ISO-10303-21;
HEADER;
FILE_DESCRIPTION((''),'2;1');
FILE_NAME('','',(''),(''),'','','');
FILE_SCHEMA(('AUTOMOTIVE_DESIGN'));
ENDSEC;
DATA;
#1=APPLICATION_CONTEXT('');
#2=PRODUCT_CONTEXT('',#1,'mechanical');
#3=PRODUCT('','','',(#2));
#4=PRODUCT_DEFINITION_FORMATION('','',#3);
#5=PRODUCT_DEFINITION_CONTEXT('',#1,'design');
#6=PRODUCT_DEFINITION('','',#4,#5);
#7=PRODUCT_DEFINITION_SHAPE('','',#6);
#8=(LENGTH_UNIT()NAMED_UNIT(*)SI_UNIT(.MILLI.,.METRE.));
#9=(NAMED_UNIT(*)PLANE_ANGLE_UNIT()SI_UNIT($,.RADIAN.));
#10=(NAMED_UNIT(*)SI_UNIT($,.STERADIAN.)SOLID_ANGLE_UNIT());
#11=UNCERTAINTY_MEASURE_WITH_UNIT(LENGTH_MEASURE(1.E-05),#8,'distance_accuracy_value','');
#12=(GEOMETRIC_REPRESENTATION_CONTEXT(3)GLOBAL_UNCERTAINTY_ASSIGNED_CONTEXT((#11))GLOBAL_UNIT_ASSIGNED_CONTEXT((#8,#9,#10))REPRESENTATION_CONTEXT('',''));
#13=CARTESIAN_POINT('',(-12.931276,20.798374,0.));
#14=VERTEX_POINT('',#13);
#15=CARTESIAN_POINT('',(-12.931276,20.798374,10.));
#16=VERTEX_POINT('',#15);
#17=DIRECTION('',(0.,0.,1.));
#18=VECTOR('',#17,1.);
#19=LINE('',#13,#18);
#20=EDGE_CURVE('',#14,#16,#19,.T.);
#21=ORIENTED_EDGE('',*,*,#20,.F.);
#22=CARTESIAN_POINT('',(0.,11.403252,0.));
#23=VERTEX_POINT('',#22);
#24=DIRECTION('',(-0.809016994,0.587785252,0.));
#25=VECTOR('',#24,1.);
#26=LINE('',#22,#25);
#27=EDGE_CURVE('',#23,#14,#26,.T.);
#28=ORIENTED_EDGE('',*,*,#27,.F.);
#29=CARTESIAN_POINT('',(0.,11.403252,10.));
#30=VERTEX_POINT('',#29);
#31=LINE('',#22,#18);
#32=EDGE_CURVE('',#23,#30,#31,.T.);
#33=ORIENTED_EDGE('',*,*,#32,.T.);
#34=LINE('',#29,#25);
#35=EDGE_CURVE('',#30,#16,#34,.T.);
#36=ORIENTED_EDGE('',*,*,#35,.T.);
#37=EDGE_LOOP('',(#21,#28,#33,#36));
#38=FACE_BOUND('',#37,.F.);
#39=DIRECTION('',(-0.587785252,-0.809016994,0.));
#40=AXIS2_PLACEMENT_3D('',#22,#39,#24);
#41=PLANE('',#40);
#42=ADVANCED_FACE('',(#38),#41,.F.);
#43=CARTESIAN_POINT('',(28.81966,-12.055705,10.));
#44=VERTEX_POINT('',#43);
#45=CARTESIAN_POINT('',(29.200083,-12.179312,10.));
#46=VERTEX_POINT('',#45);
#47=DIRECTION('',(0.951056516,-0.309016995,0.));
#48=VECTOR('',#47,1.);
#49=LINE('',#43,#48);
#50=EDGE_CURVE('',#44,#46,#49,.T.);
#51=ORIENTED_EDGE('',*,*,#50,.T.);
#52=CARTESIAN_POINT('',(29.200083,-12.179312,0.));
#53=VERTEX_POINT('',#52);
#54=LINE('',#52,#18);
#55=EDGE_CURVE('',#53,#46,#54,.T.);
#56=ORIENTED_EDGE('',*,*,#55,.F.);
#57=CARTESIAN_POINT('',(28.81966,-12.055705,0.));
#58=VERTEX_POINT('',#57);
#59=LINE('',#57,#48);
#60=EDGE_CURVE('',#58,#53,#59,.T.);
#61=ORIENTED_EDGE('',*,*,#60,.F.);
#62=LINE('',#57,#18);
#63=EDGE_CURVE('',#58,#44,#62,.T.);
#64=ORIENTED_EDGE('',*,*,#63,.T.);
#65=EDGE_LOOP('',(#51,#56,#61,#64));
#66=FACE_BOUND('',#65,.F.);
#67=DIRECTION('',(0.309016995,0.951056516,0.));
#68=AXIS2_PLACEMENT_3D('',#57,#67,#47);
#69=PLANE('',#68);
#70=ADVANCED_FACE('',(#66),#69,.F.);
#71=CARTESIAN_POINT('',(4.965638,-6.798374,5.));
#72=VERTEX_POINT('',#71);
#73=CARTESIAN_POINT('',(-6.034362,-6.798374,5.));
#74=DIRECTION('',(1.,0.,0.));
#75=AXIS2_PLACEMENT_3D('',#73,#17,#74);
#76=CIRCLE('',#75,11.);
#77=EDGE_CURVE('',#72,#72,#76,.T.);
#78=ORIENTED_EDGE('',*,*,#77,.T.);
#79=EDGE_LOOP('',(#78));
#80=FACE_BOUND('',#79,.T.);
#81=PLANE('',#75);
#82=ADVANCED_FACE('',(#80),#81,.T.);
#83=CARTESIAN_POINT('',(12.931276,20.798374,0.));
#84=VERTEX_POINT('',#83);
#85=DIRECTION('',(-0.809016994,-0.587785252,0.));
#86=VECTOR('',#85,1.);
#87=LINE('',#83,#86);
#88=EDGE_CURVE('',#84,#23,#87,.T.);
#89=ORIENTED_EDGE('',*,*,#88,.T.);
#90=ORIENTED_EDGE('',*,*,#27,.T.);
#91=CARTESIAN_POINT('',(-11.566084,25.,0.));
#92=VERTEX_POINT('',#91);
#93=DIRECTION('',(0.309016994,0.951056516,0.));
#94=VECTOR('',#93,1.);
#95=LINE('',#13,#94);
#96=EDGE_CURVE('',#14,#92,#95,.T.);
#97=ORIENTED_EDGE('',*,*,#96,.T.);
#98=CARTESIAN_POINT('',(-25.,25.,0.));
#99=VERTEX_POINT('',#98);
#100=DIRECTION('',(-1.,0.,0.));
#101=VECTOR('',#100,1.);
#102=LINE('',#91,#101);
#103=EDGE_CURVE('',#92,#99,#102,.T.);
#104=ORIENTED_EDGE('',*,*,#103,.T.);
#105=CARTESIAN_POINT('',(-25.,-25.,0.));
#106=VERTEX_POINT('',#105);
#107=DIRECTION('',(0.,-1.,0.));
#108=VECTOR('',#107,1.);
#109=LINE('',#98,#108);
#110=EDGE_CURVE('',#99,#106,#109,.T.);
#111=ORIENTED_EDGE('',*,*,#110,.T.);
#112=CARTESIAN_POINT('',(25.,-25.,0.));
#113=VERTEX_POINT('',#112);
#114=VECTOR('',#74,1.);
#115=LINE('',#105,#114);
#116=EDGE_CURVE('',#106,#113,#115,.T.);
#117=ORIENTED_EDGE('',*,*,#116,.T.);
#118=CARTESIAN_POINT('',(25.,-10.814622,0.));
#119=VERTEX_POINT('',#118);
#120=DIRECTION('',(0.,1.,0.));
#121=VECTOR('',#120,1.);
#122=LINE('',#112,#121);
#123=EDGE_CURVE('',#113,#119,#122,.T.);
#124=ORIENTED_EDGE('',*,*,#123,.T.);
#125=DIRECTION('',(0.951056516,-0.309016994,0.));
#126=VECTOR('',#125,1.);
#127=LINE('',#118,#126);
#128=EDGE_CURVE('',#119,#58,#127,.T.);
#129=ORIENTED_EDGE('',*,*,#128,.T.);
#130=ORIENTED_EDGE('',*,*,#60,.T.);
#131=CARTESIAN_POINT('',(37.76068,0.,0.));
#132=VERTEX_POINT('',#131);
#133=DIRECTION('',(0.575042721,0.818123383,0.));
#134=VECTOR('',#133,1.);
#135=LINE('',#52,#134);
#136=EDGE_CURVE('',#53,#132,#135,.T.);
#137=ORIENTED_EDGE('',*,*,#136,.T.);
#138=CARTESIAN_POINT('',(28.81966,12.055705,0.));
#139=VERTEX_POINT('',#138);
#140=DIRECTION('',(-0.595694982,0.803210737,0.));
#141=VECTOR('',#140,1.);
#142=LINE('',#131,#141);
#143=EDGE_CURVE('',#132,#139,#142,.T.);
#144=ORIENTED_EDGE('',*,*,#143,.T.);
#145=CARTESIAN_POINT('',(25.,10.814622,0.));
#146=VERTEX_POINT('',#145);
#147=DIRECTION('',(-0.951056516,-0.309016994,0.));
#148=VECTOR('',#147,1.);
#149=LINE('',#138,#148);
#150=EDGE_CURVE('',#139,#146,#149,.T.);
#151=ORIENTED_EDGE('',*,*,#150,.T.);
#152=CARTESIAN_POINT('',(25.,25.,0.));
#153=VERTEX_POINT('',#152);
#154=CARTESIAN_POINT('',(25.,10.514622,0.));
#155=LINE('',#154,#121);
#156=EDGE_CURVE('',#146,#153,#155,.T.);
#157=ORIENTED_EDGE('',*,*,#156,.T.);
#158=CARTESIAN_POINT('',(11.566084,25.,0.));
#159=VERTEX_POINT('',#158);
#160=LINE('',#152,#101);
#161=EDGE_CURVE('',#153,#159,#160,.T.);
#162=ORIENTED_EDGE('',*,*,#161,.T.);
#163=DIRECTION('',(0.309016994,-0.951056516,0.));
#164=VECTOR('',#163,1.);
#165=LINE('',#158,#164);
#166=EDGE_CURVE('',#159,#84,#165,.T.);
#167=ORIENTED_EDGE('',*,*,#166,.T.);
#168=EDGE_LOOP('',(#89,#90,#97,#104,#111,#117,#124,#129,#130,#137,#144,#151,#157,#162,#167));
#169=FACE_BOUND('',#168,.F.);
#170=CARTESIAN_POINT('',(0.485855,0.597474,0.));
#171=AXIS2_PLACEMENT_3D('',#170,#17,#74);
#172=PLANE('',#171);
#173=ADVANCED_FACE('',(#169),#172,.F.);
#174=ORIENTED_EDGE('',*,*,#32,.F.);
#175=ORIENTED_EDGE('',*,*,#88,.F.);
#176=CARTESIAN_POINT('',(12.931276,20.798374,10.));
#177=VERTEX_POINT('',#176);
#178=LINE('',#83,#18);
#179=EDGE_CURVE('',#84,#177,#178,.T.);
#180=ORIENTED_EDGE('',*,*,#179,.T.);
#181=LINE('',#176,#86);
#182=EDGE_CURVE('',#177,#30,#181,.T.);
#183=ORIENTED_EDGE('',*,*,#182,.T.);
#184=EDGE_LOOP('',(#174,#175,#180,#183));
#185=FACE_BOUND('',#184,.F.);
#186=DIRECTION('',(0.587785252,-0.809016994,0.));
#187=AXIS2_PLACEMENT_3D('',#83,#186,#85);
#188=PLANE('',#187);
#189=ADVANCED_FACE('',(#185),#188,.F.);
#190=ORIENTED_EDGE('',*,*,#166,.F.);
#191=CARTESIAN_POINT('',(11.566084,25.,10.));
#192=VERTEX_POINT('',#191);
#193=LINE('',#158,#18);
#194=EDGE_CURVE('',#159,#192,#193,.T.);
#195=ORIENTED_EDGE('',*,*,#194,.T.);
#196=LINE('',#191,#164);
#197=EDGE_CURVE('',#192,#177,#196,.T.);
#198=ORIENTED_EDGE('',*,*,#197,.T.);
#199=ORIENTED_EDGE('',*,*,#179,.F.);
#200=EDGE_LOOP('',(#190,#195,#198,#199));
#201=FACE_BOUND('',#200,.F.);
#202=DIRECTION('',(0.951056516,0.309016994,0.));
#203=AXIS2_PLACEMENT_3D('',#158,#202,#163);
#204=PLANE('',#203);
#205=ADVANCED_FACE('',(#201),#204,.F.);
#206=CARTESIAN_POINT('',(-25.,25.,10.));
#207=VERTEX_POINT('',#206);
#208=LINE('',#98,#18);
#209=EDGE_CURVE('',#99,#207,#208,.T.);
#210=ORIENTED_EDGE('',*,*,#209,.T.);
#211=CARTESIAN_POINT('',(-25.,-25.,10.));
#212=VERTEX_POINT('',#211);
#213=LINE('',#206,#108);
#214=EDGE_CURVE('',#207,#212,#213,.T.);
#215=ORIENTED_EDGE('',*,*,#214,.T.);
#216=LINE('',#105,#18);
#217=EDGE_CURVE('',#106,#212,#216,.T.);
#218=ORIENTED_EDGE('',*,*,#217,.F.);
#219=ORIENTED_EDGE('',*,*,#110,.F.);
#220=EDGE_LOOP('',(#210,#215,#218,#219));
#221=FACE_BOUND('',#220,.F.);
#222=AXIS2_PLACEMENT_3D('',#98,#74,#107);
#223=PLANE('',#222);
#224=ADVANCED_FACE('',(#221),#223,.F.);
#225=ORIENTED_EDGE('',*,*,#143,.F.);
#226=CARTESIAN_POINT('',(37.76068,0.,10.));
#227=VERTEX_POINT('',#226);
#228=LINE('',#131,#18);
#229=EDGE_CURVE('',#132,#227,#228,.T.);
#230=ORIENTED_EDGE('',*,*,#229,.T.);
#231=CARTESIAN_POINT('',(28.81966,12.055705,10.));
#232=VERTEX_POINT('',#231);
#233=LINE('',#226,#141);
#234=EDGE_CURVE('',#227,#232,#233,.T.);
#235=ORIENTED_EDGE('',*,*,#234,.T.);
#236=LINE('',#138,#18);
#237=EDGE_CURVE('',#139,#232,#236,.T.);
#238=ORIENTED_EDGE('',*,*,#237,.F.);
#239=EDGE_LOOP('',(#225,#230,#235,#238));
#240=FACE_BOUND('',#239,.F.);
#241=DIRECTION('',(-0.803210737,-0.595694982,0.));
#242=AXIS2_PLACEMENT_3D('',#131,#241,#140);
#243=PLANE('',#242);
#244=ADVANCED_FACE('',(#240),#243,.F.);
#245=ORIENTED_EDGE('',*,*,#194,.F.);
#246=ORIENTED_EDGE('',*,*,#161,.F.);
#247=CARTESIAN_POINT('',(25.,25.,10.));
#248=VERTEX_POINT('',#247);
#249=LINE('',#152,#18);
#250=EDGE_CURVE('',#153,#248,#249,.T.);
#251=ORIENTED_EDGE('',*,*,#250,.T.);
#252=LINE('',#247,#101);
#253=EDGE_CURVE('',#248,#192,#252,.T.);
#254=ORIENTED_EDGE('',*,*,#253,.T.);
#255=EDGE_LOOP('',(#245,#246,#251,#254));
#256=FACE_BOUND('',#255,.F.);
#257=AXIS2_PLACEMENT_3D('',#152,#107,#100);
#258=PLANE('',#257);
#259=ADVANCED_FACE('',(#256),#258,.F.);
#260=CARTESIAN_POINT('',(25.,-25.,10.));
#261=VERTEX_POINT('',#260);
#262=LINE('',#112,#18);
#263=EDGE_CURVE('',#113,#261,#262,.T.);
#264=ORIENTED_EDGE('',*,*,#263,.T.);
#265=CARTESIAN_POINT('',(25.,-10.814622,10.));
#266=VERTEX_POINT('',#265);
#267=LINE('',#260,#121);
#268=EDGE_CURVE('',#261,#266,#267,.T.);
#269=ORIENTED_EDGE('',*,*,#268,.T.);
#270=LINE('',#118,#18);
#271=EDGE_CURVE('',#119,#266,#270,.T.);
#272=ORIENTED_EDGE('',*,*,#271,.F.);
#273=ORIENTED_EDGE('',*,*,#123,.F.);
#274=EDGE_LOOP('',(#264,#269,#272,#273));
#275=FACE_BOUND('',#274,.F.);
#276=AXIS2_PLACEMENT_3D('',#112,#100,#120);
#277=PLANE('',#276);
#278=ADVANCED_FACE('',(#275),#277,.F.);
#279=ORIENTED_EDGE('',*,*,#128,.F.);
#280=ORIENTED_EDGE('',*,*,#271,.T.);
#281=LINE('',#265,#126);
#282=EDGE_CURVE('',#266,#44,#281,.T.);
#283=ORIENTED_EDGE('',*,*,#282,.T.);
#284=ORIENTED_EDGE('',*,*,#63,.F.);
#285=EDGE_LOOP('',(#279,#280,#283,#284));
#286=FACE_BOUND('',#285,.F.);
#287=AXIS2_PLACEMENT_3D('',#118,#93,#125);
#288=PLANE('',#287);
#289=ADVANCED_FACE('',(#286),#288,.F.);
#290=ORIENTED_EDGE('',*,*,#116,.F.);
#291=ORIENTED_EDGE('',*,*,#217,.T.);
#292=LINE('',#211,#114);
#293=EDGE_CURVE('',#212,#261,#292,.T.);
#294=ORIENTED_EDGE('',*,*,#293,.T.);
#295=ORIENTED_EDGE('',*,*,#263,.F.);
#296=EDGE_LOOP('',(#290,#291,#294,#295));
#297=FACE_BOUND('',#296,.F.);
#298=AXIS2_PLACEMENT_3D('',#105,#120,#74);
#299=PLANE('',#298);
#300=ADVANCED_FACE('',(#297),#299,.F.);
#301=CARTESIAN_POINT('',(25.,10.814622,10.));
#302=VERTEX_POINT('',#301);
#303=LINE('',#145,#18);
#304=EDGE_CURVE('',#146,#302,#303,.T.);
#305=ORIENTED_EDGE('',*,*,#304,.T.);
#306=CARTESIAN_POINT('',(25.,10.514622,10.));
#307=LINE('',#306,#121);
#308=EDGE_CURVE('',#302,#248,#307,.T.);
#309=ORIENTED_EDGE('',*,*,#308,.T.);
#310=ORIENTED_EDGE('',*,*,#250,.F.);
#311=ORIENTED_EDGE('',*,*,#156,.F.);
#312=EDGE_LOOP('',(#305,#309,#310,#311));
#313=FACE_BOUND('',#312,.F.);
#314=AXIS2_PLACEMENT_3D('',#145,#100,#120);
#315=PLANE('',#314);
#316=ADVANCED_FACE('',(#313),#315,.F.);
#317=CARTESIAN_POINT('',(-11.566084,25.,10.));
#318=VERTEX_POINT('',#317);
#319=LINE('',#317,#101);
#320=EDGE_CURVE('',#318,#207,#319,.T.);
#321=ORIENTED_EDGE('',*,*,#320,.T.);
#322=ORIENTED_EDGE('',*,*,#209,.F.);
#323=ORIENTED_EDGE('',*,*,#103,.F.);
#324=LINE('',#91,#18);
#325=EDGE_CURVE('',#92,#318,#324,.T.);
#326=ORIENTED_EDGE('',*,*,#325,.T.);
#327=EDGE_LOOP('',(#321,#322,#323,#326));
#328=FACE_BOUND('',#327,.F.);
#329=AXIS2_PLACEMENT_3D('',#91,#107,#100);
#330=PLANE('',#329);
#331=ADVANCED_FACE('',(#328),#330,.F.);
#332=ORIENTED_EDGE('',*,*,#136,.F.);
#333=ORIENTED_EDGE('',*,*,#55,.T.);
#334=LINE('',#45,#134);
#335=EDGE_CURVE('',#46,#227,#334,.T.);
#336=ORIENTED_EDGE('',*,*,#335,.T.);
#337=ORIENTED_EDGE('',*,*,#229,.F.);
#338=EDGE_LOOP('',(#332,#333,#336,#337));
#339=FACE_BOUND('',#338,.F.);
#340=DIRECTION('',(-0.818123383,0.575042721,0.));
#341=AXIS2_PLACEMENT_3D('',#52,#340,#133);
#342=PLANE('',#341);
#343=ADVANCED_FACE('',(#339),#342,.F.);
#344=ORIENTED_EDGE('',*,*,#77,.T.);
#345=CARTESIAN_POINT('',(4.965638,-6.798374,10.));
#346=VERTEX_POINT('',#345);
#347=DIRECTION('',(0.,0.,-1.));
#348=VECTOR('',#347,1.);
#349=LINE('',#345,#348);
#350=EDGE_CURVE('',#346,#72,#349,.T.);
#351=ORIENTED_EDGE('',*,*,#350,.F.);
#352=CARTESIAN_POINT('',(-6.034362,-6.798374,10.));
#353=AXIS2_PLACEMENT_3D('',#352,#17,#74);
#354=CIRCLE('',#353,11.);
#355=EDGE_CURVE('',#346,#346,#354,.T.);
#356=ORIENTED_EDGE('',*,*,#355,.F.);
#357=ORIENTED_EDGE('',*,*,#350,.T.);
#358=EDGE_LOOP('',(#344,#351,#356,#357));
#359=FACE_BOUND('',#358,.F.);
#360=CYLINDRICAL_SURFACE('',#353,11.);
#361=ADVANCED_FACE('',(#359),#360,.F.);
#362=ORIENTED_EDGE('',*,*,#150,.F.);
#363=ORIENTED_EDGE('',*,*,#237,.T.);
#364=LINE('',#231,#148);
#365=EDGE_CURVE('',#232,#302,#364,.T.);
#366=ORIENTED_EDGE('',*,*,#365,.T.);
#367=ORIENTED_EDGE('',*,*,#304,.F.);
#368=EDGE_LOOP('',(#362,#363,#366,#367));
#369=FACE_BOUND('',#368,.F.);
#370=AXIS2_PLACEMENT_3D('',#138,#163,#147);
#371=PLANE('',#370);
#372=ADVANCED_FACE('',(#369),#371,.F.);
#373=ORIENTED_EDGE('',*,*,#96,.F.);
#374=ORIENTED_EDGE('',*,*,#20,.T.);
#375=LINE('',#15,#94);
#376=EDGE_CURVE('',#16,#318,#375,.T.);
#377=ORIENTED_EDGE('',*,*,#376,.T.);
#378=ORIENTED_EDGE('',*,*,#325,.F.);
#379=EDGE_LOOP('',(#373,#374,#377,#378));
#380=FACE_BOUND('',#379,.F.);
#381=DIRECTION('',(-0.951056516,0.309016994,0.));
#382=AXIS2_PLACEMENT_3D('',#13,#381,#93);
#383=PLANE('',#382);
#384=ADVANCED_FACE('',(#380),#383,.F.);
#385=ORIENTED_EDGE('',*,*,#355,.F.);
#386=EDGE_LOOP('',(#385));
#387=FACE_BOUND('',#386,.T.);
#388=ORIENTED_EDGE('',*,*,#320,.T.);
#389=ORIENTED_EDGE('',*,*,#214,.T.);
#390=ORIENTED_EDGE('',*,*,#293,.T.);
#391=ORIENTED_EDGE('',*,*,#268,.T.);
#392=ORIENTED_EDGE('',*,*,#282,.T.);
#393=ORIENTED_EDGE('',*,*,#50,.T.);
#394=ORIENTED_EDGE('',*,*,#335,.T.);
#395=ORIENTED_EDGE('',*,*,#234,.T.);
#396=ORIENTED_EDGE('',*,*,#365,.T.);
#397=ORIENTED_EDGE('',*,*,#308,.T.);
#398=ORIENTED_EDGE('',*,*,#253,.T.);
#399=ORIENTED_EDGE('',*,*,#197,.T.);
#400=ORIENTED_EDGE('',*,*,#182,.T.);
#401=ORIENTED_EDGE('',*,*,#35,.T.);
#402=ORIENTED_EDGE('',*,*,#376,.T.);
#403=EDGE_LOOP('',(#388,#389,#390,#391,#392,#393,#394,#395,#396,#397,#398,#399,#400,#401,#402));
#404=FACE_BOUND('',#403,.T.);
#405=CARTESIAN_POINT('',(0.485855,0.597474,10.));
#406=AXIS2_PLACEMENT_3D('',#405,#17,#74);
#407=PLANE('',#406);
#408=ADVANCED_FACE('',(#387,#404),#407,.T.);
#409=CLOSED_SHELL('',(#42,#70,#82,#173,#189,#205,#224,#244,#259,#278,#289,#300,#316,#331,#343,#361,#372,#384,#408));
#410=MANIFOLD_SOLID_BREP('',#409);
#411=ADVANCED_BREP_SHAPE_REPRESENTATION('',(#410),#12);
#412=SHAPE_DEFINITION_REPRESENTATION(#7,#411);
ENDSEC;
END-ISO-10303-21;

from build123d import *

# Parameters (mm, degrees)
F1_DEPTH = 10
F2_R     = 11
F3_DEPTH = 5


# Not quite as in the source:
# - a feature names something its author has since deleted; it is built from what else it names


with BuildPart() as f1:
    # F0 (on Top) → F1 (new body)
    with BuildSketch(Plane.XY):
        Polygon((-25, -25), (25, -25), (25, -10.8146222424), (25, -10.5146222424), (15, -7.2654252801), (15, 7.2654252801), (25, 10.5146222424), (25, 10.8146222424), (25, 25), (11.5660844666, 25), (12.9312755504, 20.7983738762), (0, 11.4032522475), (-12.9312755504, 20.7983738762), (-11.5660844666, 25), (-25, 25), align=None)
        Polygon((25, 10.5146222424), (25, -10.5146222424), (28.8196601125, -11.7557050458), (37.360679775, 0), (28.8196601125, 11.7557050458), align=None)
        Polygon((15, -7.2654252801), (25, -10.5146222424), (25, 10.5146222424), (15, 7.2654252801), align=None)
        Polygon((25, 10.8146222424), (25, 10.5146222424), (28.8196601125, 11.7557050458), (37.360679775, 0), (37.760679775, 0), (28.8196601125, 12.0557050458), align=None)
        Polygon((25, -10.5146222424), (25, -10.8146222424), (28.8196601125, -12.0557050458), (29.200082719, -12.1793118436), (37.760679775, 0), (37.360679775, 0), (28.8196601125, -11.7557050458), align=None)
    extrude(amount=F1_DEPTH)

    # F2 (on face) → F3 (cut)
    with BuildSketch(Plane.XY.offset(10)):
        with Locations((-6.0343622248, -6.7983738762)):
            Circle(F2_R)
    extrude(amount=-F3_DEPTH, mode=Mode.SUBTRACT)


solid = f1.part
